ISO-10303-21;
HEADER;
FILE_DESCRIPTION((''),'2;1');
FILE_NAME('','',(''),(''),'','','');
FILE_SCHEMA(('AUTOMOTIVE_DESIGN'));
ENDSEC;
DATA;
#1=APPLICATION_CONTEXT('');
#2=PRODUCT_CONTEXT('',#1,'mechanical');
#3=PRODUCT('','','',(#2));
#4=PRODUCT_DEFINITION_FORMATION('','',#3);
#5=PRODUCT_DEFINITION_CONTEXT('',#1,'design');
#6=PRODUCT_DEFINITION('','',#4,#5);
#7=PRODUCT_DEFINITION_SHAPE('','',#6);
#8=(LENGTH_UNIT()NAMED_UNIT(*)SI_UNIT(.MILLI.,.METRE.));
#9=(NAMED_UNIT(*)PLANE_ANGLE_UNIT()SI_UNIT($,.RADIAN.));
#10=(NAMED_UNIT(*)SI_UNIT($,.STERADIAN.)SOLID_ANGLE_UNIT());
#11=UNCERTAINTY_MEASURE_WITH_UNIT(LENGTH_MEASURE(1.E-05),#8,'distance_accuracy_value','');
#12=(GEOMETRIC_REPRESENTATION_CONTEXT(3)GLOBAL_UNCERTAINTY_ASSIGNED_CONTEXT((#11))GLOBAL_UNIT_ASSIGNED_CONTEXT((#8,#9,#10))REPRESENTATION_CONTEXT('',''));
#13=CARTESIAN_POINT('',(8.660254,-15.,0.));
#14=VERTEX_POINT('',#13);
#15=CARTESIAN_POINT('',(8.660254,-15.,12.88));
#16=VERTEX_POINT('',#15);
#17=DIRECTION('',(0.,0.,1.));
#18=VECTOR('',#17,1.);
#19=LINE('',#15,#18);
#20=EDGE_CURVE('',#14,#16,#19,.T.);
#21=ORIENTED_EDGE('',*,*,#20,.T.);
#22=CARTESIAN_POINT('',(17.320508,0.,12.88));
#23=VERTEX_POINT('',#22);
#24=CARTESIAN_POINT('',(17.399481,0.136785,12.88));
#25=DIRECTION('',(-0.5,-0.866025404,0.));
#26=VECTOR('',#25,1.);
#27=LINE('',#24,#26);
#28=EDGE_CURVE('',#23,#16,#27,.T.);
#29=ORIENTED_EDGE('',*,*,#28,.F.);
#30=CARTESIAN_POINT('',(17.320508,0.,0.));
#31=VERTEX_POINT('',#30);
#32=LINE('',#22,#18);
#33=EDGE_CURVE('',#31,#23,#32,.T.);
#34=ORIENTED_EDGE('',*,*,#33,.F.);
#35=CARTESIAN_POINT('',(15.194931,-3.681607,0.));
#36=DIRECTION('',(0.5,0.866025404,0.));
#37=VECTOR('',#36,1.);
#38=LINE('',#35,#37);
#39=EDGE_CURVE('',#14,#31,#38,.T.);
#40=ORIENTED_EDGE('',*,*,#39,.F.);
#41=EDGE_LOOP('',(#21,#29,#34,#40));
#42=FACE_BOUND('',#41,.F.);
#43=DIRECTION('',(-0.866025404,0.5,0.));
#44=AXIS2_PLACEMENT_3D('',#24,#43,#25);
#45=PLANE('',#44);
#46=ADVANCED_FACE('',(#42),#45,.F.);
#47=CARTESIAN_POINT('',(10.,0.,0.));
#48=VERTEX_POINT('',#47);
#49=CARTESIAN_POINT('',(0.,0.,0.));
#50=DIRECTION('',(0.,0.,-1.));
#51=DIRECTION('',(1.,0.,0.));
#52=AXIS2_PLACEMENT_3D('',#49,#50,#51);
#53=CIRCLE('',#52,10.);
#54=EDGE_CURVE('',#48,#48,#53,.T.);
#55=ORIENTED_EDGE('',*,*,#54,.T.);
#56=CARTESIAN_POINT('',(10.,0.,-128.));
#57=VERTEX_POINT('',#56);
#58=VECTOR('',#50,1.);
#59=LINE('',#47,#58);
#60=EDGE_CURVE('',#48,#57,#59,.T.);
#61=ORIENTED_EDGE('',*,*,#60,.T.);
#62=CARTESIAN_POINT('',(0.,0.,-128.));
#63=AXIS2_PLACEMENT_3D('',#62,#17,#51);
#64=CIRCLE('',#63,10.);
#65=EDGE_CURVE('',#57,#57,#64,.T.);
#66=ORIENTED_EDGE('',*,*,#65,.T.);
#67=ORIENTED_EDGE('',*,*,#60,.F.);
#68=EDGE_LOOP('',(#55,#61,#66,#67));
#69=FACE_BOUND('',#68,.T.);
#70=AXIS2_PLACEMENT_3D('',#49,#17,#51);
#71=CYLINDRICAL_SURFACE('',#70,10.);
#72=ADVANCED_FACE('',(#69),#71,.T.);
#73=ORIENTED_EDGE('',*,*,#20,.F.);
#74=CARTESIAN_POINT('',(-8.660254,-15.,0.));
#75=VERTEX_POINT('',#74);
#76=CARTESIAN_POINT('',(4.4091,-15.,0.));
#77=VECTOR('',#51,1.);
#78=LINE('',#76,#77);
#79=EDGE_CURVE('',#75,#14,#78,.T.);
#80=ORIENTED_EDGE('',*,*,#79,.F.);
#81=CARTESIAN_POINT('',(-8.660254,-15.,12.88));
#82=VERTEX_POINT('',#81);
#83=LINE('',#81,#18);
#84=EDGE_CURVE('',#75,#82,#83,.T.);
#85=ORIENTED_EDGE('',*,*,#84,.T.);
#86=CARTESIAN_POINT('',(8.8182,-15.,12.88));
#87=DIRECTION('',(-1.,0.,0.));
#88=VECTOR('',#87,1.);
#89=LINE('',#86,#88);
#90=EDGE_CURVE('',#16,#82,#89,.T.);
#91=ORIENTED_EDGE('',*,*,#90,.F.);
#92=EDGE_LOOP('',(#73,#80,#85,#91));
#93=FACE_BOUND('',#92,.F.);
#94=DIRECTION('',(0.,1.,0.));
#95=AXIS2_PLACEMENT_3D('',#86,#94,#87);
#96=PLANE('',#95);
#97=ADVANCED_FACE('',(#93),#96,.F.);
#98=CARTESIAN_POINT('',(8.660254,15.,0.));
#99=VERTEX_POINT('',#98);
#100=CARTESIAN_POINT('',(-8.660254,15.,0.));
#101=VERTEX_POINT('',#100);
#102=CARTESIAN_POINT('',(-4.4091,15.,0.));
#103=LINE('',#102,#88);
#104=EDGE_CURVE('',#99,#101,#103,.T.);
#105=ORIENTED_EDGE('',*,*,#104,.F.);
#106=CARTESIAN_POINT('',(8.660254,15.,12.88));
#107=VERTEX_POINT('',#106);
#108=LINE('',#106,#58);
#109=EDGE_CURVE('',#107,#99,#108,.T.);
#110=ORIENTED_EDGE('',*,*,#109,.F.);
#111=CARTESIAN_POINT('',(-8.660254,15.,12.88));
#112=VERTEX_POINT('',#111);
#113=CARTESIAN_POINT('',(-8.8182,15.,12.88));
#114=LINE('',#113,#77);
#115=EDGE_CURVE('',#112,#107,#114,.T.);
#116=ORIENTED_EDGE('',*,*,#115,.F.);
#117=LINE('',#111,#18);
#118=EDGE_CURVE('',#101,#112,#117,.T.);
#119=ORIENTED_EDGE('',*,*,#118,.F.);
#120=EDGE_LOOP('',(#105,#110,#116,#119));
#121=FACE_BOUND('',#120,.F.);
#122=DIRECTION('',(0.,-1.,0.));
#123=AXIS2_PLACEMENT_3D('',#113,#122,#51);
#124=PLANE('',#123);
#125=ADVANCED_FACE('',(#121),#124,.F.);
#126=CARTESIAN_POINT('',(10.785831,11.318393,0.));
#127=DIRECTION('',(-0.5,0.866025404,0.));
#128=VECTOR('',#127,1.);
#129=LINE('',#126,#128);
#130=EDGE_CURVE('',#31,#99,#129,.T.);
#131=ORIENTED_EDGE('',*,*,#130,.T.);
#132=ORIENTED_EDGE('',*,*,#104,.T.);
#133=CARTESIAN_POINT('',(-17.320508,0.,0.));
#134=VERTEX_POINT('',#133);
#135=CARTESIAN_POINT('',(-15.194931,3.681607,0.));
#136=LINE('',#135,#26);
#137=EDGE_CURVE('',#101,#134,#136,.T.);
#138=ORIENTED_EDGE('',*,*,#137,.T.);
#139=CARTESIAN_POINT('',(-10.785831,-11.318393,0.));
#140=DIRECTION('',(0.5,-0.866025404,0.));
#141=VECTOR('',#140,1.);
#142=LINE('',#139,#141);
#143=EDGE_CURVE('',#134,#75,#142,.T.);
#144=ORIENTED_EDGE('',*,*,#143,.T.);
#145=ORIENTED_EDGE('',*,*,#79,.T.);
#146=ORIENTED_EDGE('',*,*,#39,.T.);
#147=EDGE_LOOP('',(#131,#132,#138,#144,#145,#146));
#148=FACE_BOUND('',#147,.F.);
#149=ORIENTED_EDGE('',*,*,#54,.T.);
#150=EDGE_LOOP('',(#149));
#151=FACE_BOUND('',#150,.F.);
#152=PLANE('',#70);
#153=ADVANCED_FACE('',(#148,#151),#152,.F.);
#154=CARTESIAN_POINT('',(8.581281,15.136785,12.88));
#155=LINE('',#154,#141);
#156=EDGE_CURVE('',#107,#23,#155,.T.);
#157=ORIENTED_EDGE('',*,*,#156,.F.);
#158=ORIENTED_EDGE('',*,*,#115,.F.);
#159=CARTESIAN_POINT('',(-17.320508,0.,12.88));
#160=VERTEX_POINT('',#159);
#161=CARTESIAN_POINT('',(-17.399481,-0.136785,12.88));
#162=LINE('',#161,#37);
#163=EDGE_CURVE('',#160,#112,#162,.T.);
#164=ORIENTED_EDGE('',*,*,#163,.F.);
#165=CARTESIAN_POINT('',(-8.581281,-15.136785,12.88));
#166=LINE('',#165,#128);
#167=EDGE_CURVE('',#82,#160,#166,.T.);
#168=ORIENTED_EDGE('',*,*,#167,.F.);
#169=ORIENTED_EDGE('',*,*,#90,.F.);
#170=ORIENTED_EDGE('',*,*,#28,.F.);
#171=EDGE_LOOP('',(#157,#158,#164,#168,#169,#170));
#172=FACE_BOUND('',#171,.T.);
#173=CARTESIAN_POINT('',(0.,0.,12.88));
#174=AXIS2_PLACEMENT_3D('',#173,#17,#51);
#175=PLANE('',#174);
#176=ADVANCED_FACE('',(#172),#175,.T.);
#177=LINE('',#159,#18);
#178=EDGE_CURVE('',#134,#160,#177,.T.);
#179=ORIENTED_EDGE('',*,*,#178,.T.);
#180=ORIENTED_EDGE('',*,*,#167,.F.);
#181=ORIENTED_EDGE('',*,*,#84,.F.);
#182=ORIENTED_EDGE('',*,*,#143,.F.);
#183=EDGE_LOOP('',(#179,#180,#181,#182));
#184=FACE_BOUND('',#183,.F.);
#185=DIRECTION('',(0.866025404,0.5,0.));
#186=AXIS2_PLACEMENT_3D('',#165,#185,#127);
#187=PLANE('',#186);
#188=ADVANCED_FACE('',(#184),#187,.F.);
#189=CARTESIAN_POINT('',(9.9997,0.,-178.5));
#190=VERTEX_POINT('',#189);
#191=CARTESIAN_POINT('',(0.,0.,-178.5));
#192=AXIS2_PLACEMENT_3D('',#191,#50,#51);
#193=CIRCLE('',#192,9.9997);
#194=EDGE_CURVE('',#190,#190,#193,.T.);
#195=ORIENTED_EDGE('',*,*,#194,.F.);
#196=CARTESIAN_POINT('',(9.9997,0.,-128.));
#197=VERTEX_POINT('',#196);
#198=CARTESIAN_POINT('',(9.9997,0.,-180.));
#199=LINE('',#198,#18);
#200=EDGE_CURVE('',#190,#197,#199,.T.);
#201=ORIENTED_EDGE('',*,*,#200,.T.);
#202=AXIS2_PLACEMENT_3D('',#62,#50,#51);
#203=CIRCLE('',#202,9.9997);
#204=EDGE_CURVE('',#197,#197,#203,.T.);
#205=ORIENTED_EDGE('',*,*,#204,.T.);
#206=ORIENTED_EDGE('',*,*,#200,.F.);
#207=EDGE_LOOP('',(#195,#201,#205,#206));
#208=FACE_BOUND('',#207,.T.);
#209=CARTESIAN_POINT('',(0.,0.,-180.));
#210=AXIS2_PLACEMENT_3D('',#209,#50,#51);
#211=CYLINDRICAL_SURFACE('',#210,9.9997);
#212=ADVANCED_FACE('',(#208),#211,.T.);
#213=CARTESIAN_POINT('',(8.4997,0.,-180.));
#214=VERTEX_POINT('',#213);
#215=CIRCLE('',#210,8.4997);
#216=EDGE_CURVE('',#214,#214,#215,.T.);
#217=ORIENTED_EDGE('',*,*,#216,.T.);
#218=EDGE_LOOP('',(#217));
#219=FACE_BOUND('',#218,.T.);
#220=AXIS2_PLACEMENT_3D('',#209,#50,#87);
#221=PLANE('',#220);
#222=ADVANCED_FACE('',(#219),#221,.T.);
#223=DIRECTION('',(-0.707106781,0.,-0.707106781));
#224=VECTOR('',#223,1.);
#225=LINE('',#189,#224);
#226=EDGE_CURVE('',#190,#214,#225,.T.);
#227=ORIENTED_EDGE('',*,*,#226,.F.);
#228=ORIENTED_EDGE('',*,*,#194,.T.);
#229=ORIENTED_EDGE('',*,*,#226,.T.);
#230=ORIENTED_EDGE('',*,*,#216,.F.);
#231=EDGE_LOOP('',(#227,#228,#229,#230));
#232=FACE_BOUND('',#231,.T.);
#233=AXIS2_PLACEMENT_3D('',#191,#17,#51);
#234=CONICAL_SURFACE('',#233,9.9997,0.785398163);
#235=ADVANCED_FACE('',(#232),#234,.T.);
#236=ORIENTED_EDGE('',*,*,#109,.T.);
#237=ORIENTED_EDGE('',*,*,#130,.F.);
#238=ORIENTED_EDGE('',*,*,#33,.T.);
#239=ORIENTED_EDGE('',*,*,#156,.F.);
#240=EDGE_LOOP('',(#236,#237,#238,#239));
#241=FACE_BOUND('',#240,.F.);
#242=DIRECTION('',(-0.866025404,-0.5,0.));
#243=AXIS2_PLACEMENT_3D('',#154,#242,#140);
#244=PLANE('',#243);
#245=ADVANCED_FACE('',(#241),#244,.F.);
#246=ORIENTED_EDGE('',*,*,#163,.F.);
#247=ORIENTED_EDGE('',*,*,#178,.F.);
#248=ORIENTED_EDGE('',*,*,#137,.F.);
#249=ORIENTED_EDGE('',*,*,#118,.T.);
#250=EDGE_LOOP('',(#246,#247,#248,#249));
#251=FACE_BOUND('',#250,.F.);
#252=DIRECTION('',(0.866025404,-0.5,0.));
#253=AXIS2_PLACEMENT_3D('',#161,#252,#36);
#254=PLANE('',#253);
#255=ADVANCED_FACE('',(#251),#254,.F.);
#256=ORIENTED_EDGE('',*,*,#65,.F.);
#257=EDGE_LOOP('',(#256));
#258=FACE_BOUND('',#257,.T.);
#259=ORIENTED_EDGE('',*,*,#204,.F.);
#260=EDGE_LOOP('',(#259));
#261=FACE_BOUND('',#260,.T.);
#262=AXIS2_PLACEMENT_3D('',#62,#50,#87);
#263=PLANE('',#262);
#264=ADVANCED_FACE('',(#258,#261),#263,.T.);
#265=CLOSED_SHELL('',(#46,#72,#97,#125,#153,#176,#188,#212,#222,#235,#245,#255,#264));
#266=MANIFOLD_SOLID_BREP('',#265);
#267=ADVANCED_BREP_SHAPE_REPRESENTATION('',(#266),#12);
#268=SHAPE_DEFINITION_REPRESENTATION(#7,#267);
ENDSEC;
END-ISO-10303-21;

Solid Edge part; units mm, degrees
sketch "Sketch1" plane through (0, 0, 0) normal (0, 0, 1) x (1, 0, 0)
  circle A0 centre (0, 0) radius 17.4
  dimension "D1" = 34.8
extrude "Protrusion1" add sketch "Sketch1" along normal blind 12.88
sketch "Sketch2" plane through (0, 0, 0) normal (0, 0, -1) x (1, 0, 0)
  circle A0 centre (0, 0) radius 10
extrude "Protrusion2" add sketch "Sketch2" along normal blind 180
sketch "Sketch3" plane through (0, 0, -180) normal (0, 0, -1) x (1, 0, 0)
  circle A0 centre (0, 0) radius 9.9997
extrude "Cutout1" cut sketch "Sketch3" against normal blind 52 flip side to cut
chamfer "Chamfer_1" distance 1.5 angle 45 1 edges at (-9.9997, 0, -180)
sketch "Sketch4" plane through (0, 0, 12.88) normal (0, 0, 1) x (1, 0, 0)
  line L0 (-8.8182, 15) -> (8.8182, 15)
  dimension "D1" = 30
extrude "Cutout2" cut sketch "Sketch4" against normal up to next material side at (0, 15.05, 12.88)
pattern_circular "Pattern1" count 6 over 360 about axis through (0, 0, 12.88) along (0, 0, 1) of "Cutout2"
properties part number "24104522"
